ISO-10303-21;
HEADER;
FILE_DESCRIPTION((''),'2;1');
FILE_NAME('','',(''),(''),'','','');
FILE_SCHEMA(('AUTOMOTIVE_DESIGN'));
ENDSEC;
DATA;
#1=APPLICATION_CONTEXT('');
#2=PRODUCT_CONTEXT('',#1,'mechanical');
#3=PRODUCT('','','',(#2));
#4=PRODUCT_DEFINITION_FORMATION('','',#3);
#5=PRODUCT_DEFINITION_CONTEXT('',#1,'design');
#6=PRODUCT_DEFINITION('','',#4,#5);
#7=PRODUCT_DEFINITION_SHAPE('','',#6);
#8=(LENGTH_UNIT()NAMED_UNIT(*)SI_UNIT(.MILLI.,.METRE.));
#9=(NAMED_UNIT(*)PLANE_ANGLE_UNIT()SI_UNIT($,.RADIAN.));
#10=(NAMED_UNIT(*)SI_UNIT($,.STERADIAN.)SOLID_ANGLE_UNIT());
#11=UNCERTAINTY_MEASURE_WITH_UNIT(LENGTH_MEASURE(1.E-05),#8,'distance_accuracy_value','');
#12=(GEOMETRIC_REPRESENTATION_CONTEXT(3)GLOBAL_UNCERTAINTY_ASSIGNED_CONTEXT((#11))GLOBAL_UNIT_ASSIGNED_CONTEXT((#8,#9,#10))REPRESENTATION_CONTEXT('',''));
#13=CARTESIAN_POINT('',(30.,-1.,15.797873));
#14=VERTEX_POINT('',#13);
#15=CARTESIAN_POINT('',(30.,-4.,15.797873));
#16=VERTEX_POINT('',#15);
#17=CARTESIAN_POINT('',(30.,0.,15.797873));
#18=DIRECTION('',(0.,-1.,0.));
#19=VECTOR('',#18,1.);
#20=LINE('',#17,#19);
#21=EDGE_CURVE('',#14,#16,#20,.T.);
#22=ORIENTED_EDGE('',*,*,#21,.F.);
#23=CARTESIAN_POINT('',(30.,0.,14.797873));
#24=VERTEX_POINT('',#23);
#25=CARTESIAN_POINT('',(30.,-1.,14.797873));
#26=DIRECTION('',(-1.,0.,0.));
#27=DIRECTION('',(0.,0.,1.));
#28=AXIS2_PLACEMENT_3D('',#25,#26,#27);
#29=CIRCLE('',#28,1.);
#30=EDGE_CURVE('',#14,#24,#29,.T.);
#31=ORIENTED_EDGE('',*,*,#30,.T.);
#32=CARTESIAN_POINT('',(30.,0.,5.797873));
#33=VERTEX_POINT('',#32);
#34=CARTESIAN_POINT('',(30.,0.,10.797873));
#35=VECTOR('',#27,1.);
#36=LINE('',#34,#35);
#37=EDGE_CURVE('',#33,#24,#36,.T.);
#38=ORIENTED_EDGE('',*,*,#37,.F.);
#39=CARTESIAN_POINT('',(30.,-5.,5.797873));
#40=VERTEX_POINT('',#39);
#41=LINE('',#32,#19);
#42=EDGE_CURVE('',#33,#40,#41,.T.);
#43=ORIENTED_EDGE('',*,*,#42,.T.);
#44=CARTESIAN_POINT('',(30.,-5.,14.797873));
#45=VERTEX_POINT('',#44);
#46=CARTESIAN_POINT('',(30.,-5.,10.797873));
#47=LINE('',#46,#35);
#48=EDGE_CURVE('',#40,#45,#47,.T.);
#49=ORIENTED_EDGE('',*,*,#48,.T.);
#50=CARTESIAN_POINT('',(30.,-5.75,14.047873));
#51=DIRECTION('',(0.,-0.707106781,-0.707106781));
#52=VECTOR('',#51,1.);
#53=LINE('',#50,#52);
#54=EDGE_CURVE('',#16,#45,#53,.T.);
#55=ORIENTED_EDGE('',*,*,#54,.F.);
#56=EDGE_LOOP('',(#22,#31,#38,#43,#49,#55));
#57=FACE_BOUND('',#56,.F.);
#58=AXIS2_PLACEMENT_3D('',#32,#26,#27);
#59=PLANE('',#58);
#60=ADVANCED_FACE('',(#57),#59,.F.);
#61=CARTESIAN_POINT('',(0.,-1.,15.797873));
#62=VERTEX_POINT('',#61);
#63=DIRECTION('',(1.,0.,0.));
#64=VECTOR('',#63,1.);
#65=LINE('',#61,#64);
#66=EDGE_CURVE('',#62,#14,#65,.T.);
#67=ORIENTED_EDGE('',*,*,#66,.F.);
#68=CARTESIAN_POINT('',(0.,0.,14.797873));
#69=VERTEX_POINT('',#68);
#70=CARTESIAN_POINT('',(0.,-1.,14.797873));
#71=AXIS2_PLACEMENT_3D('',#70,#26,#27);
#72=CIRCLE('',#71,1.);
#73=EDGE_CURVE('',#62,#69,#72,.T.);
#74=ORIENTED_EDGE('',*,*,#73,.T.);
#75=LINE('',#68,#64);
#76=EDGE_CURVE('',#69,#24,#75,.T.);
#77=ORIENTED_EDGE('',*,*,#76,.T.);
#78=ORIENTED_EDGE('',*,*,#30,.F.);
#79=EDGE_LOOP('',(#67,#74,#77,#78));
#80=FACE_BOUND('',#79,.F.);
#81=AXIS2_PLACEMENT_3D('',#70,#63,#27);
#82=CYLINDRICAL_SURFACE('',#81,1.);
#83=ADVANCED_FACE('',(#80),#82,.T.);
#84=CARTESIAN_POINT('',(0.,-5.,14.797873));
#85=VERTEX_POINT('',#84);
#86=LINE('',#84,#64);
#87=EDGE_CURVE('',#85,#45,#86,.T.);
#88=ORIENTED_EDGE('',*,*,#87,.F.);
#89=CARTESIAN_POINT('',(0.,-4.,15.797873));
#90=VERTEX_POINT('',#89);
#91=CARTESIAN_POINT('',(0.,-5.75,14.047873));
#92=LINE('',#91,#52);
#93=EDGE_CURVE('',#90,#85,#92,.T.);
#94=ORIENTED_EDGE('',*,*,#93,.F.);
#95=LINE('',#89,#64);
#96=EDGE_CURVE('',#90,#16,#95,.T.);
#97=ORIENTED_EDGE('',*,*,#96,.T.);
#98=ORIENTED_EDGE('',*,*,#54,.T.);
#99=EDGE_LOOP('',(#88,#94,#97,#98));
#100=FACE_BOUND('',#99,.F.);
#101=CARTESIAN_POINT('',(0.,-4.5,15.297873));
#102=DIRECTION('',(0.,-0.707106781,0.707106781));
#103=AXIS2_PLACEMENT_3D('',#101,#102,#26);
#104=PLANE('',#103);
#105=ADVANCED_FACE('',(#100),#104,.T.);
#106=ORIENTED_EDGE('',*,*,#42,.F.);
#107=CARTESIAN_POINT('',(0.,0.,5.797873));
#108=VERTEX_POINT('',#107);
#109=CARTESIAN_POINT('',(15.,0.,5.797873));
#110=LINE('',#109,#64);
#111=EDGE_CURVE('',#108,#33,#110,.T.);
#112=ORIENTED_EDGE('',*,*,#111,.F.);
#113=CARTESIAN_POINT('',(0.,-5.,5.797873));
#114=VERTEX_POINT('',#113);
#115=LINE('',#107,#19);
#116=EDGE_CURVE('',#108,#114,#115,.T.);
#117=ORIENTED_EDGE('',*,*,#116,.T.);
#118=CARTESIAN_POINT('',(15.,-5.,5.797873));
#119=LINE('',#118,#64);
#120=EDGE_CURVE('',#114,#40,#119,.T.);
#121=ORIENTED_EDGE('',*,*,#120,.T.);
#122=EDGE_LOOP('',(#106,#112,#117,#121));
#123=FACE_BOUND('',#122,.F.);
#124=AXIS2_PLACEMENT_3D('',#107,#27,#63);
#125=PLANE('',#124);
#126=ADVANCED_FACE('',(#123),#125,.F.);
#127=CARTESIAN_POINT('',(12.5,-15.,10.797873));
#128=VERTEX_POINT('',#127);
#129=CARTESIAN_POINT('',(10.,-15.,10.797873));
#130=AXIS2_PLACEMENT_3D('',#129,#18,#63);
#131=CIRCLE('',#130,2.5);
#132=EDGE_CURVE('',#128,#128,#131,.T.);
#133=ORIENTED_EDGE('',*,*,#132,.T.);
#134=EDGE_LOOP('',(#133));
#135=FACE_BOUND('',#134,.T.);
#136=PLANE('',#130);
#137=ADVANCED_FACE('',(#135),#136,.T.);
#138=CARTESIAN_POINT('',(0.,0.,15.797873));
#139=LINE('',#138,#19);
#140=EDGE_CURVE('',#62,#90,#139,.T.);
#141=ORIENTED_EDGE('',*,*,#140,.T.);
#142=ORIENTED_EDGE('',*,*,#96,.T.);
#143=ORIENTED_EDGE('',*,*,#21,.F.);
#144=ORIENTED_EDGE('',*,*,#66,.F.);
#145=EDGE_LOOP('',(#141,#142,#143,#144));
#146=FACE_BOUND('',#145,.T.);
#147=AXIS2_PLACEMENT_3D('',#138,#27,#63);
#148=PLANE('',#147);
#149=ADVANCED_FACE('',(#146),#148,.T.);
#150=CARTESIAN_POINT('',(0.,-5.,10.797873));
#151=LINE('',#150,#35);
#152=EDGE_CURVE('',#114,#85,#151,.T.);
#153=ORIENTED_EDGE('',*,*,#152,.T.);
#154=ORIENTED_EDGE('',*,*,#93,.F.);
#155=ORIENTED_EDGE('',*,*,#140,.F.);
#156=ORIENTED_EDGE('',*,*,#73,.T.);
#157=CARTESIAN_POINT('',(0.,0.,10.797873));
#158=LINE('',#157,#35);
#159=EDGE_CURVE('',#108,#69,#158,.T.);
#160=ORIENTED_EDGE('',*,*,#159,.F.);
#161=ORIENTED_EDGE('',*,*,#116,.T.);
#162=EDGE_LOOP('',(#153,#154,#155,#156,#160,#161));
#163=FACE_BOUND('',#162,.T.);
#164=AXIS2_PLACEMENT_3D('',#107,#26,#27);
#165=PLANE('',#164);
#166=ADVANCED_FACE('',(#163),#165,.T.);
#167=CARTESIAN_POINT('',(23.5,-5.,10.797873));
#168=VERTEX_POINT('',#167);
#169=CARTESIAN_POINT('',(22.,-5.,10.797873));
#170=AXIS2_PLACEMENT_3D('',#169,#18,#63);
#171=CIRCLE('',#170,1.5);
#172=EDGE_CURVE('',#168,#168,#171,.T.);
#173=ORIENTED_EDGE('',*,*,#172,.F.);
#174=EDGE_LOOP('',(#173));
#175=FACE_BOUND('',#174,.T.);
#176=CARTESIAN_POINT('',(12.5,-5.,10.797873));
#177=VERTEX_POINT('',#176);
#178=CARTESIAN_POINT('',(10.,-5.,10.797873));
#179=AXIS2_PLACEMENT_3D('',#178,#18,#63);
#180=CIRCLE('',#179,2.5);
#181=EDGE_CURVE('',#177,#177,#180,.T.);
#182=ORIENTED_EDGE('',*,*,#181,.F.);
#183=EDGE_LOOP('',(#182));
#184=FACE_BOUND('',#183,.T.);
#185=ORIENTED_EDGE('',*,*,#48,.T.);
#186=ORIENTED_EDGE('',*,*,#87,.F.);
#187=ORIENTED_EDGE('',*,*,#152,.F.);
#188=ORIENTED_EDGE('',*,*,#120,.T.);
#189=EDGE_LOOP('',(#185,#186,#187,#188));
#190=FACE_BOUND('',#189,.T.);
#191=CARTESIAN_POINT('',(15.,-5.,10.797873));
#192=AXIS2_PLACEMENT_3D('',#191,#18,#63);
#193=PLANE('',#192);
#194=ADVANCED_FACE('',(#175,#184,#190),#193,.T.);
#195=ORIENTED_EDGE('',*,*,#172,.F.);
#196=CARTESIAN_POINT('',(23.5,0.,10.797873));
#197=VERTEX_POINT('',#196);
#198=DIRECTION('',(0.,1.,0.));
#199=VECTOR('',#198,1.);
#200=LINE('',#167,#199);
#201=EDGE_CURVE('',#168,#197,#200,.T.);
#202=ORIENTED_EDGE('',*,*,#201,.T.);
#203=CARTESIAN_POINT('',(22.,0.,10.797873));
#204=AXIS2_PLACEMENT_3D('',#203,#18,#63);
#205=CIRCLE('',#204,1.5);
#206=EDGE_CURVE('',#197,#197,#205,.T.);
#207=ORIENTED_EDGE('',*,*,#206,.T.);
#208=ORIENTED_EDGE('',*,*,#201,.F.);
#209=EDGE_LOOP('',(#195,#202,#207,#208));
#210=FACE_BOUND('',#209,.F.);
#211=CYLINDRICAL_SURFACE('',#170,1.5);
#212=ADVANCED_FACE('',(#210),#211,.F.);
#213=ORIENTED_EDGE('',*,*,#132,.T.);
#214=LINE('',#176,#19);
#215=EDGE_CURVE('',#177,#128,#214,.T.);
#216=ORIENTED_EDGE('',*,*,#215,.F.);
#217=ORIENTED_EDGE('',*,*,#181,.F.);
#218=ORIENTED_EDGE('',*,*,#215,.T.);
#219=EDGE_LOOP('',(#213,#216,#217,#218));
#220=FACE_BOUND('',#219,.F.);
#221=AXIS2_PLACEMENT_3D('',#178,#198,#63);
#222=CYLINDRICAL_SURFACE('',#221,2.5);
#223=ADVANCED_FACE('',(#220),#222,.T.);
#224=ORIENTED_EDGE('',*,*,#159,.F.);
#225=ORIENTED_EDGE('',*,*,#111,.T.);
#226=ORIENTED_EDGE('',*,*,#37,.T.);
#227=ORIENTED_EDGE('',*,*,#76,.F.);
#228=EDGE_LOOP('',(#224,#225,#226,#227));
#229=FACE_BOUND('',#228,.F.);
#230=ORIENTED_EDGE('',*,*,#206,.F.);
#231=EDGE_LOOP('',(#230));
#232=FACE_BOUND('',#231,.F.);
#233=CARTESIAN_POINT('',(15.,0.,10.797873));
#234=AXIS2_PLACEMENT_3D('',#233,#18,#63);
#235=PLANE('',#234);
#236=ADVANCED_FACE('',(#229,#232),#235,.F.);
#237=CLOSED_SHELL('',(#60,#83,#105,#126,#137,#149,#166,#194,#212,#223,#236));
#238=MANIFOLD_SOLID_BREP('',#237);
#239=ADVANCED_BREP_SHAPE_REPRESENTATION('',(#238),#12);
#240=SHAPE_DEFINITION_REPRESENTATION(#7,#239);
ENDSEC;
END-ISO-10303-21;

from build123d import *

# Parameters (mm, degrees)
F0_W     = 30
F0_H     = 10
F1_DEPTH = 5
F2_R     = 2.5
F3_DEPTH = 10
F4_R     = 1.5
F5_DEPTH = 5.001
F6_SIZE  = 1
F7_R     = 1


# Not quite as in the source:
# - a feature names something its author has since deleted; it is built from what else it names


with BuildPart() as f1:
    # F0 (on Front) → F1 (new body)
    with BuildSketch(Plane.XZ):
        with Locations((15, 10.7978725549)):
            Rectangle(F0_W, F0_H)
    extrude(amount=F1_DEPTH)

    # F2 (on face) → F3 (join)
    with BuildSketch(Plane.XZ.offset(5)):
        with Locations((10, 10.7978725549)):
            Circle(F2_R)
    extrude(amount=F3_DEPTH)

    # F4 (on face) → F5 (cut, through all)
    with BuildSketch(Plane.XZ.offset(5)):
        with Locations((22, 10.7978725549)):
            Circle(F4_R)
    extrude(amount=-F5_DEPTH, mode=Mode.SUBTRACT)

    # F6
    f6_edges = [f1.edges().sort_by_distance(p)[0] for p in [
        (15, -5, 15.797873),
    ]]
    chamfer(f6_edges, length=F6_SIZE)

    # F7
    f7_edges = [f1.edges().sort_by_distance(p)[0] for p in [
        (15, 0, 15.797873),
    ]]
    fillet(f7_edges, radius=F7_R)


solid = f1.part
